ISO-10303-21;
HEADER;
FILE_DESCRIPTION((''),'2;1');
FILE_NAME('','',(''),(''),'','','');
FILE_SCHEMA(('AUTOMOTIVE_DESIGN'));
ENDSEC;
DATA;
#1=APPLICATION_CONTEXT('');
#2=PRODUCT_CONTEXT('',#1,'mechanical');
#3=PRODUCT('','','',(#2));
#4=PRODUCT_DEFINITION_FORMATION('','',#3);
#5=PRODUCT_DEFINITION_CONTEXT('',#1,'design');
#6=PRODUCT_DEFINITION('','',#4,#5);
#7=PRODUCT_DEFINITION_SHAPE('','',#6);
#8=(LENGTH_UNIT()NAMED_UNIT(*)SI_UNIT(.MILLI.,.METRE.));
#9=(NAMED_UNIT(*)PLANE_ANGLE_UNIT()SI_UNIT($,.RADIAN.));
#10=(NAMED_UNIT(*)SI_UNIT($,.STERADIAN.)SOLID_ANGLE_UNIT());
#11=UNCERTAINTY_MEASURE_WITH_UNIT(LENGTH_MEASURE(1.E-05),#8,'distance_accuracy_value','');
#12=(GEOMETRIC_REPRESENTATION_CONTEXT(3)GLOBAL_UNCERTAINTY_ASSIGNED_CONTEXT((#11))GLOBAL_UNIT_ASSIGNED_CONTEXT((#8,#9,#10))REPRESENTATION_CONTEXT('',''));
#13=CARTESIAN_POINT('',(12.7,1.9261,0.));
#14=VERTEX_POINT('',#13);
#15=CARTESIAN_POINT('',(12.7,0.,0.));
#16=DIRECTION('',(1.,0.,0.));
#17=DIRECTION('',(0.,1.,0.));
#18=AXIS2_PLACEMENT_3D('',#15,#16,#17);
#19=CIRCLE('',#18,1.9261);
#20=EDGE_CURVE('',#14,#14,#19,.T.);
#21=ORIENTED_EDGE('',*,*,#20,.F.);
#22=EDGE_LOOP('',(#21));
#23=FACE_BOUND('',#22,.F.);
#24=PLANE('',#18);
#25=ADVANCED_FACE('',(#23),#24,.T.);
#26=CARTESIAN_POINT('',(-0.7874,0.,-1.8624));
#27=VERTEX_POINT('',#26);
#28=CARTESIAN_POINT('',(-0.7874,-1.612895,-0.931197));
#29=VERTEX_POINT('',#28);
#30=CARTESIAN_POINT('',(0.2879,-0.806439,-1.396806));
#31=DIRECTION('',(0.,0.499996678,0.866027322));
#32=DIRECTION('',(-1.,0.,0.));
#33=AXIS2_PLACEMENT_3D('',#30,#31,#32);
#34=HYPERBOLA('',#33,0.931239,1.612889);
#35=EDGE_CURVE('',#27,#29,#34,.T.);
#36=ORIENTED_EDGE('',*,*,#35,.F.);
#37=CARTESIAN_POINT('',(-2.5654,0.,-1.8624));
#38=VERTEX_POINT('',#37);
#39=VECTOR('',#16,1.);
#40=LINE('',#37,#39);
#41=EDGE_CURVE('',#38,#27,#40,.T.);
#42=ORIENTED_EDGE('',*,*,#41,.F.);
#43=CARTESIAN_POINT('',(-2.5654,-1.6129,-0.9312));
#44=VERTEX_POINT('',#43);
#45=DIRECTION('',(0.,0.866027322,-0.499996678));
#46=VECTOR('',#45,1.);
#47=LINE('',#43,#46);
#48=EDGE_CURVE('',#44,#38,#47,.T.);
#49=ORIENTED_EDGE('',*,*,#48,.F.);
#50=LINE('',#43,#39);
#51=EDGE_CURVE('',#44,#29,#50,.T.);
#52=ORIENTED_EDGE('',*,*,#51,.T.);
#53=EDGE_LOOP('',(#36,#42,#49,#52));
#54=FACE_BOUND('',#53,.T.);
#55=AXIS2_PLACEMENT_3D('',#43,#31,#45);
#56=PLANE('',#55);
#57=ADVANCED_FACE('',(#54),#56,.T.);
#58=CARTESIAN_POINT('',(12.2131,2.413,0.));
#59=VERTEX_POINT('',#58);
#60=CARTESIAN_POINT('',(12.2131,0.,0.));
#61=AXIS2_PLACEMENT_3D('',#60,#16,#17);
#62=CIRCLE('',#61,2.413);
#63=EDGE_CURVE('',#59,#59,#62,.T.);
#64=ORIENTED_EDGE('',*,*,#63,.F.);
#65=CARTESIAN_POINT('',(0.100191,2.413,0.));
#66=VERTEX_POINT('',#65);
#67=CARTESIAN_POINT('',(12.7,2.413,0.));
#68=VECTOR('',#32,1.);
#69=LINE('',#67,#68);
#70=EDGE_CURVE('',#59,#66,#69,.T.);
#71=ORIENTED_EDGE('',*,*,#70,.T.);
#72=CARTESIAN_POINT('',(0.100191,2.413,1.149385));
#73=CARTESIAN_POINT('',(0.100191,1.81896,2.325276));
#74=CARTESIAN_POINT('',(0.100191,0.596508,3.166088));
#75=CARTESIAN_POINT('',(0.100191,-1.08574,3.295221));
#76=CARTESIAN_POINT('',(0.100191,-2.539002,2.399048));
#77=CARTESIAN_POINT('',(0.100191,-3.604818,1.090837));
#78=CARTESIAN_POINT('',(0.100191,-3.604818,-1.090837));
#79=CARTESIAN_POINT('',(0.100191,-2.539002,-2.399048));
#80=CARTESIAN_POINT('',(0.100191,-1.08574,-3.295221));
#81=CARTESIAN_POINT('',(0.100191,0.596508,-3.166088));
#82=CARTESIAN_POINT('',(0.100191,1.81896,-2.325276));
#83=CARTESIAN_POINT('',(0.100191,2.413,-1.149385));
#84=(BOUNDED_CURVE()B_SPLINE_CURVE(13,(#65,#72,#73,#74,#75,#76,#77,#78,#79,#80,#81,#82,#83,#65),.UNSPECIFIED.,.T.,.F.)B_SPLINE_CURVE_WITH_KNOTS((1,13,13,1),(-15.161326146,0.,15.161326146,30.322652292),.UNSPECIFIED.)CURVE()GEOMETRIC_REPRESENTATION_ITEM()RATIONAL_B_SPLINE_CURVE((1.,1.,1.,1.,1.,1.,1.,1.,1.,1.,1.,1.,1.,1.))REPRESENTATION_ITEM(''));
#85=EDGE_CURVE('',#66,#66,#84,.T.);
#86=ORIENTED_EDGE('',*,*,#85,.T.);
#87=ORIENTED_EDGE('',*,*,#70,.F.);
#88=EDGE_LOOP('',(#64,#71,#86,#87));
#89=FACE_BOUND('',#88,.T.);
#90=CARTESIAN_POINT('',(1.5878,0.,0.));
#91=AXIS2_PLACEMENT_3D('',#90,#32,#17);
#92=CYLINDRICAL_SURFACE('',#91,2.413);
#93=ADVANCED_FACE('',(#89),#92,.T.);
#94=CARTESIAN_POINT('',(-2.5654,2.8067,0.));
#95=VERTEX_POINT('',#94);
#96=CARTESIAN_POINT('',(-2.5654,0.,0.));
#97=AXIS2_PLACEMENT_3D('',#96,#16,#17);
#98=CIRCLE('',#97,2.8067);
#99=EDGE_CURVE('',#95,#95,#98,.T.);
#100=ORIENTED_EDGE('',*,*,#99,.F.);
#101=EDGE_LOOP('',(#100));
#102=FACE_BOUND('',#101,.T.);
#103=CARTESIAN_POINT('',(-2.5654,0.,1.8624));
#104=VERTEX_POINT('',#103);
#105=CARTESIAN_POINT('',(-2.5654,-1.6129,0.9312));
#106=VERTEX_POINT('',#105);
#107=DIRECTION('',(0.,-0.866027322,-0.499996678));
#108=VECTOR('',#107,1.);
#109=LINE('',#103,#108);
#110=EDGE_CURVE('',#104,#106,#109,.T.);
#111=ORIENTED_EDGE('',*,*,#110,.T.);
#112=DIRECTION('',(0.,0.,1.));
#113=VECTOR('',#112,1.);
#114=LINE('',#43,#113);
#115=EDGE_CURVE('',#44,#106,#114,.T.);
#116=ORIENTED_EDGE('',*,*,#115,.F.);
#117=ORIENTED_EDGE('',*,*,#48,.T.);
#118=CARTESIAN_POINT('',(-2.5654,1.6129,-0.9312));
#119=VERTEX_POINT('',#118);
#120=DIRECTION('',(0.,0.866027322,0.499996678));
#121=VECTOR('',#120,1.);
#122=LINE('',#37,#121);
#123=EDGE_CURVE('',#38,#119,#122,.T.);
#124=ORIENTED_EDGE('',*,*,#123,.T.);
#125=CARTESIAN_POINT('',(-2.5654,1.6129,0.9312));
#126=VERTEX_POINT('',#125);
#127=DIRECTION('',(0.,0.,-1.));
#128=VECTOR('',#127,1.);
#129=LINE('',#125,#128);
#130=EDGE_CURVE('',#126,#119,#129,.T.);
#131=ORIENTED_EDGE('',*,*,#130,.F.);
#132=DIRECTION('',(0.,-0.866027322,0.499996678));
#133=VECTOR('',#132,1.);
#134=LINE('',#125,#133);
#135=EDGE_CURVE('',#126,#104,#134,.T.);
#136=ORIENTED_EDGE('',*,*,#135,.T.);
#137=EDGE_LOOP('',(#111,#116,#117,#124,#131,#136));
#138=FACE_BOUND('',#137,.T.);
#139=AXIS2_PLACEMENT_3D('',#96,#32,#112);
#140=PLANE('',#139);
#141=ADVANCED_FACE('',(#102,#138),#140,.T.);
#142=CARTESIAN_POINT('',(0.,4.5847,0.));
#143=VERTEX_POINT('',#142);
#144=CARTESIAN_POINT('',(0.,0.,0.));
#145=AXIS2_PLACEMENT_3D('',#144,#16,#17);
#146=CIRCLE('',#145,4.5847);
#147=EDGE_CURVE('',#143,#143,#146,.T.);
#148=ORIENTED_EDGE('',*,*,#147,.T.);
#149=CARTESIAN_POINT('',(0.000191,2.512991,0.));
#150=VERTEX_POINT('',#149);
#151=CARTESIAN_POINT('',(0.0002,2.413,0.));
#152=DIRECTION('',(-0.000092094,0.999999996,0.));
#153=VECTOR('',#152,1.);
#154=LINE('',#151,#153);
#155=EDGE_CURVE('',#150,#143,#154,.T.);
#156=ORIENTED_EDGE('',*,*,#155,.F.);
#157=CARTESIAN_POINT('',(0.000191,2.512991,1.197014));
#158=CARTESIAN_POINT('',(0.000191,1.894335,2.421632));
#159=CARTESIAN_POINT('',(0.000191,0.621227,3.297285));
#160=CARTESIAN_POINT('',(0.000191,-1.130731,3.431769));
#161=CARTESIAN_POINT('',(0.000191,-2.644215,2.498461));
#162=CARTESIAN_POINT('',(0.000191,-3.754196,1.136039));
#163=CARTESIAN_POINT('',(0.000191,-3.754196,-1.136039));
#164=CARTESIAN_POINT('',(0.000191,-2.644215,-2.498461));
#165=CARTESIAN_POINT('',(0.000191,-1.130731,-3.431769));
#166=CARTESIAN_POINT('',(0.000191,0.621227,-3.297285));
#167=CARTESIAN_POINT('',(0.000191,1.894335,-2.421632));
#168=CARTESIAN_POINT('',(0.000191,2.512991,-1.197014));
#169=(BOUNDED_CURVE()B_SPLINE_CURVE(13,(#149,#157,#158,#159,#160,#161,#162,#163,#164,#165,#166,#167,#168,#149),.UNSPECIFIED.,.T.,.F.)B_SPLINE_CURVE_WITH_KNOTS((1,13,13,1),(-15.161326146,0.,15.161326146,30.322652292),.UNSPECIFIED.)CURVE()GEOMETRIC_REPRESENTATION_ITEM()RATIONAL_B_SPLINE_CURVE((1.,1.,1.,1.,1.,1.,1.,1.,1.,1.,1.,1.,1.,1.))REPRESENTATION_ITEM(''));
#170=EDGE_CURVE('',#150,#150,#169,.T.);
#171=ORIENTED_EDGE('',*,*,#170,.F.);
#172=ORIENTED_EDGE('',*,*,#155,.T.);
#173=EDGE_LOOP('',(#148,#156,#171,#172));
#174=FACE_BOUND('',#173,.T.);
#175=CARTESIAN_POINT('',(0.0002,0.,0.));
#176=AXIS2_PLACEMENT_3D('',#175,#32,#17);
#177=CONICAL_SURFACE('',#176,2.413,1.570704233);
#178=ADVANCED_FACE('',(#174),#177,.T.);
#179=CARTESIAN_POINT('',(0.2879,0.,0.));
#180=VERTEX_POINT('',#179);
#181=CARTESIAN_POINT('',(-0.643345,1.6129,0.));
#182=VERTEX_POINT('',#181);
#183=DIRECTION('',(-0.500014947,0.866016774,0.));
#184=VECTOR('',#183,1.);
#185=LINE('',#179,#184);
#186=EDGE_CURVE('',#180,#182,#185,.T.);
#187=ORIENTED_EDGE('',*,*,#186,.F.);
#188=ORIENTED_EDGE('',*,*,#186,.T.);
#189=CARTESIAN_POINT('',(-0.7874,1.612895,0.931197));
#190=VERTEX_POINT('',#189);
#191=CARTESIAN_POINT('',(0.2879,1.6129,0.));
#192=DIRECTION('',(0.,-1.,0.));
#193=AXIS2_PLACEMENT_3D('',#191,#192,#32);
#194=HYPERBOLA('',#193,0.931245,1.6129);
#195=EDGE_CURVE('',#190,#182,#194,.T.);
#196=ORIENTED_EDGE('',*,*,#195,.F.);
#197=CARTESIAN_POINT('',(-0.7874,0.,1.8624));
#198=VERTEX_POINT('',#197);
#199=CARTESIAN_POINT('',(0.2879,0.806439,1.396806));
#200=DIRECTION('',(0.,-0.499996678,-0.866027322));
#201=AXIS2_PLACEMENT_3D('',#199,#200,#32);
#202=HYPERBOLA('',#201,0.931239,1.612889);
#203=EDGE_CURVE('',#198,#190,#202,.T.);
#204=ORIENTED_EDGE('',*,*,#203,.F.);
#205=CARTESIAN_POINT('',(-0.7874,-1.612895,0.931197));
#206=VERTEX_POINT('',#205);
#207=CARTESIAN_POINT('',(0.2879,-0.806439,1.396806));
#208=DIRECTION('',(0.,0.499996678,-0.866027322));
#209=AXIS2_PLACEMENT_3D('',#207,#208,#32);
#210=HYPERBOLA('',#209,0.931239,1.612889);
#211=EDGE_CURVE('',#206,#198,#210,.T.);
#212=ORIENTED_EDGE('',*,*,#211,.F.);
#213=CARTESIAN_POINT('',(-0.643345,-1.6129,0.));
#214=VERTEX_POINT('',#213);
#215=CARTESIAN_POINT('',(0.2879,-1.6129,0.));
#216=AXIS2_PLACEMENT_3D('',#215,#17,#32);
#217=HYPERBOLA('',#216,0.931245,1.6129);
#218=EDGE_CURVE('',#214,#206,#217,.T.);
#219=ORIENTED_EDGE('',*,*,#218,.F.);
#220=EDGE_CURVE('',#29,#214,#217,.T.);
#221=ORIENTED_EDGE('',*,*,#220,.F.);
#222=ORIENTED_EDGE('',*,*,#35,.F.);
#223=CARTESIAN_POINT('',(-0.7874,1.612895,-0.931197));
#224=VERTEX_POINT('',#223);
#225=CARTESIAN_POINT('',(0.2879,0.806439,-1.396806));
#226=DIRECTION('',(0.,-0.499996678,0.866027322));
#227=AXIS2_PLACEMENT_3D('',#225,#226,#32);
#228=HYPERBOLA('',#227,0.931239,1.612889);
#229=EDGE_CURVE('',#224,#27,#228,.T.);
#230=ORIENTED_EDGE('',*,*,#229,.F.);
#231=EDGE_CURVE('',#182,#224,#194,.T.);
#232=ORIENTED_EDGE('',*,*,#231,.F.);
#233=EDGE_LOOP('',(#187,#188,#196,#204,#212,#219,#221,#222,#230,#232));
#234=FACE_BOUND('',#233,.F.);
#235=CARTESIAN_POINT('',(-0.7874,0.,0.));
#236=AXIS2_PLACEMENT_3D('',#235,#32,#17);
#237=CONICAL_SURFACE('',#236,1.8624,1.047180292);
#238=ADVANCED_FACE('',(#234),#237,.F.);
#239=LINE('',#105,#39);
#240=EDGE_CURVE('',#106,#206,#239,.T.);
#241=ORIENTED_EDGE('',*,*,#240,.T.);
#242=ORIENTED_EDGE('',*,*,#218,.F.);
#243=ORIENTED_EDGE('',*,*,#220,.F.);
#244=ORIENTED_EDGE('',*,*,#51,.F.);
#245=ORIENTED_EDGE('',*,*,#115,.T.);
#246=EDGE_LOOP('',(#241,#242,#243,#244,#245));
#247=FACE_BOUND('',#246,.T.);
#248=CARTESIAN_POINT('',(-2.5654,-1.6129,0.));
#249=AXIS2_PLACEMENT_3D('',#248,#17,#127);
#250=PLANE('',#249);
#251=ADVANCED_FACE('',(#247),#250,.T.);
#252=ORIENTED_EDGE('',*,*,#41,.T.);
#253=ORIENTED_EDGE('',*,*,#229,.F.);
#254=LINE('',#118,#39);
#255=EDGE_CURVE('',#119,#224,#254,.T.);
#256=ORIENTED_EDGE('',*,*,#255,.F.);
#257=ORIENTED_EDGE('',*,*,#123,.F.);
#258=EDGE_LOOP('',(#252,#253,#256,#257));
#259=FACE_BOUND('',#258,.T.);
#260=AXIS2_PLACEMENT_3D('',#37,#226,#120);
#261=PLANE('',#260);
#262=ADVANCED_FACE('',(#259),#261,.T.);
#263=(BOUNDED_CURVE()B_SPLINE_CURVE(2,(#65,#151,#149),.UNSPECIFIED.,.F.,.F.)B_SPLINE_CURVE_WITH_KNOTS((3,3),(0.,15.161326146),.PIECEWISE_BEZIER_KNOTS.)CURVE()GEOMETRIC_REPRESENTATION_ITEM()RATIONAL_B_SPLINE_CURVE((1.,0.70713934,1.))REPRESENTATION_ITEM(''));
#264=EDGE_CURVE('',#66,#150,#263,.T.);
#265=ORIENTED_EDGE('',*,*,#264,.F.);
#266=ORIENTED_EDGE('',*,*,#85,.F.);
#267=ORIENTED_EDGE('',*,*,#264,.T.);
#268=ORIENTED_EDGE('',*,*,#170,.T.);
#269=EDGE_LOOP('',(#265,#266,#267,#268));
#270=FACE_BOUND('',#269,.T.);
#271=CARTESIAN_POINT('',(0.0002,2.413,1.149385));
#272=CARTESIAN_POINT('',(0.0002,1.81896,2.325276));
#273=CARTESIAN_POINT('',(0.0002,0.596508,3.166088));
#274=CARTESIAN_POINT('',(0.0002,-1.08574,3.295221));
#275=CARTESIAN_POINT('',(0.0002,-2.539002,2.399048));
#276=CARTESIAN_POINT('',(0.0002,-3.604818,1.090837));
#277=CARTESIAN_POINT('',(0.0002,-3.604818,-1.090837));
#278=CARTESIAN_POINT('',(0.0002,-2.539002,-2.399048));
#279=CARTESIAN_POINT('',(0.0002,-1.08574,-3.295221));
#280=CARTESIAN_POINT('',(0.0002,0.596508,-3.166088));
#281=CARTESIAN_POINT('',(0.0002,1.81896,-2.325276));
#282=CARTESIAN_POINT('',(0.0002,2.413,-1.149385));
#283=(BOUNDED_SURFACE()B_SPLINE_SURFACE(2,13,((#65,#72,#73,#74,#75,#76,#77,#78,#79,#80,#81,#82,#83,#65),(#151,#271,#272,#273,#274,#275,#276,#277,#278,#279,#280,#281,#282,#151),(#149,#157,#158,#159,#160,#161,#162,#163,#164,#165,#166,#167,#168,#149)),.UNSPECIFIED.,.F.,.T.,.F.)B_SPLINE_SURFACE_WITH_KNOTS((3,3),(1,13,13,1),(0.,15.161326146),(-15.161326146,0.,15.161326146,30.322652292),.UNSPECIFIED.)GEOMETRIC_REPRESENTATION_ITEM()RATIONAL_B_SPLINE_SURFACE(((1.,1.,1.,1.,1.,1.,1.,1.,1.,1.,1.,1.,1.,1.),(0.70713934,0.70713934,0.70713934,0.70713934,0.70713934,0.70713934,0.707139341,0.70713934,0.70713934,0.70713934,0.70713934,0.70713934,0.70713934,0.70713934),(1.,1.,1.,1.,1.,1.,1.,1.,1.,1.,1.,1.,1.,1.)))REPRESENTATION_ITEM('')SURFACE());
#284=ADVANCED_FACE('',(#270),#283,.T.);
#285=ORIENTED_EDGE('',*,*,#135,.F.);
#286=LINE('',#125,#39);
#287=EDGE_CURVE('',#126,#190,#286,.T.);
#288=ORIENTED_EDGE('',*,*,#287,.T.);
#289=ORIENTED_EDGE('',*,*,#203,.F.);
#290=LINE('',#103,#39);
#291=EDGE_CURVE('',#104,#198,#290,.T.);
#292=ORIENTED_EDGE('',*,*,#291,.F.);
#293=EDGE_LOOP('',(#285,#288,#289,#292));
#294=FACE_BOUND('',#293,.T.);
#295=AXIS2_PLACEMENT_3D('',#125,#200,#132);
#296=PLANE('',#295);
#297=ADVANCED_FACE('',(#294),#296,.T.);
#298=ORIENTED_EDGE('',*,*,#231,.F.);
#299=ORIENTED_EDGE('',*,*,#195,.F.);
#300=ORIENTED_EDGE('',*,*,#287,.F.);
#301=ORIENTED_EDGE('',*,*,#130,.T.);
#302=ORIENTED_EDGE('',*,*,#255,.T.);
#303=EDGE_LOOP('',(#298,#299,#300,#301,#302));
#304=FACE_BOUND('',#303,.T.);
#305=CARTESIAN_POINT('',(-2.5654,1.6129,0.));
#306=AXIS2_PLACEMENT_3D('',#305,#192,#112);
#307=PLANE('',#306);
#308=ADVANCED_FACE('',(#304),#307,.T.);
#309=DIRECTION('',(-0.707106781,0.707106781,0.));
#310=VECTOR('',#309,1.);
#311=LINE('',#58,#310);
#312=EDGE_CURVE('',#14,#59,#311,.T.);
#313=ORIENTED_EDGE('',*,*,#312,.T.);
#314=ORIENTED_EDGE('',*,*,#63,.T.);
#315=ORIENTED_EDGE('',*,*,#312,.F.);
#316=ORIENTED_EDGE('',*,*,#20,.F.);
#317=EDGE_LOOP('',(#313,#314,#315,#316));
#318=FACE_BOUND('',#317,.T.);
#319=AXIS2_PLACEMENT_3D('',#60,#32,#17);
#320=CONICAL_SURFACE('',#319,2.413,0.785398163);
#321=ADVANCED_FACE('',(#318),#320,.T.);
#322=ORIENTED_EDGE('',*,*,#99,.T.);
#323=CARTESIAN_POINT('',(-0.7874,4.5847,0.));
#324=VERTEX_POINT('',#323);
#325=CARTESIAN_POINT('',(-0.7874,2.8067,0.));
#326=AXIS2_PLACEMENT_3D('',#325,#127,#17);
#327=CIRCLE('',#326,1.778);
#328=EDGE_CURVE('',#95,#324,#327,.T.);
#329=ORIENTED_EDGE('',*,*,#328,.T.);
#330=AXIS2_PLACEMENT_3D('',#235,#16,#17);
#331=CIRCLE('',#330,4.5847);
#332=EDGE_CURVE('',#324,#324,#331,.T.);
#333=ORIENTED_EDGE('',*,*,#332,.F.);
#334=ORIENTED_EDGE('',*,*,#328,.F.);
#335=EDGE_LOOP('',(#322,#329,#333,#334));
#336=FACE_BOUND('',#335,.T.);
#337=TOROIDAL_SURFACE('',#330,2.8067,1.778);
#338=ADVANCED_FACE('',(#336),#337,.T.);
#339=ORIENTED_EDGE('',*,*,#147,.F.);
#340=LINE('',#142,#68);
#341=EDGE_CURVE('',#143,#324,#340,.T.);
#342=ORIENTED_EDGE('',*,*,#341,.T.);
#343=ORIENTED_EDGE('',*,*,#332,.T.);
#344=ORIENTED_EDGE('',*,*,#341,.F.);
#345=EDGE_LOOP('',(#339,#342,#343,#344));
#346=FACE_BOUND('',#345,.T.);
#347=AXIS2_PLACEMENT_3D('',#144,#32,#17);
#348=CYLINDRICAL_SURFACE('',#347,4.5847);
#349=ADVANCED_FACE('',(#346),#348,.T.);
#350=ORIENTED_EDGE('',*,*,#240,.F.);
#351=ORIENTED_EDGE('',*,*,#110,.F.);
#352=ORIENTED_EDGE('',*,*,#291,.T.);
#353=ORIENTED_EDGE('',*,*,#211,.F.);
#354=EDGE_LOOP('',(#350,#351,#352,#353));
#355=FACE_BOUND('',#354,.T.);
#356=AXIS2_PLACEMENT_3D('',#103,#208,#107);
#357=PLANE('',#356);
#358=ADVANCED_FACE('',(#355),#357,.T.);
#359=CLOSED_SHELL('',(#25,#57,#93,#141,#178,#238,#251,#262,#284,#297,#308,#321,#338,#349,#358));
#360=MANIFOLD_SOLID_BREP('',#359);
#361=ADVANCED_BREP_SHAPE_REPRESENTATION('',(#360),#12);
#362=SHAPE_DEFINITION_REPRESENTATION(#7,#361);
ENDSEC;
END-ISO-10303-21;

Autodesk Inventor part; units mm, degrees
ref_plane "YZ Plane" through (0, 0, 0) normal (1, 0, 0) x (0, 1, 0)
ref_plane "XZ Plane" through (0, 0, 0) normal (0, 1, 0) x (-1, 0, 0)
sketch "Sketch1" plane through (0, 0, 0) normal (0, 0, 1) x (1, 0, 0)
  line L0 (0.2879, 0) -> (12.7, 0)
  line L1 (12.7, 0) -> (12.7, 2.413)
  line L2 (12.7, 2.413) -> (1.5878, 2.413)
  line L3 (1.5878, 2.413) -> (0.0002, 2.413)
  line L4 (0.0002, 2.413) -> (0, 2.413)
  line L5 (0, 2.413) -> (0, 4.5847)
  line L6 (0, 4.5847) -> (-2.5654, 4.5847)
  line L7 (-2.5654, 4.5847) -> (-2.5654, 1.8624)
  line L8 (-2.5654, 1.8624) -> (-0.7874, 1.8624)
  line L9 (-0.7874, 1.8624) -> (0.2879, 0)
  line L10 (-5.6185, 0) -> (15.7531, 0) projected
  line L11 (0, -0.9169) -> (0, 5.5016) projected
  line L12 (1.5878, 2.413) -> (0, 2.413) construction
  dimension "d1" = 11.1122
  dimension "d2" = 1.5876
  dimension "d3" = 2.5654
  dimension "d4" = 1.778
  dimension "d5" = 60
  dimension "d6" = 4.826
  dimension "d7" = 4.826
  dimension "d8" = 3.7248
  dimension "d9" = 9.1694
  dimension "d26" = 12.7
revolve "Body" add sketch "Sketch1" angle 360 about axis through (0.2879, 0, 0) along (1, 0, 0) contours L9 L11 L3 L2 L1 L0 | L9 L8 L7 L6 L5 L11
sketch "Sketch2" plane through (-2.5654, 0, 0) normal (-1, 0, 0) x (0, 0, 1)
  circle A0 centre (0, 0) radius 1.8624 projected
  line L0 (0, -6.4186) -> (0, 6.4186) projected
  line L1 (-6.4186, 0) -> (6.4186, 0) projected
  line L2 (1.8624, 0) -> (0.9312, -1.6129)
  line L3 (0.9312, -1.6129) -> (-0.9312, -1.6129)
  line L4 (-0.9312, -1.6129) -> (-1.8624, 0)
  line L5 (-1.8624, 0) -> (-0.9312, 1.6129)
  line L6 (-0.9312, 1.6129) -> (0.9312, 1.6129)
  line L7 (0.9312, 1.6129) -> (1.8624, 0)
extrude "Slot" add sketch "Sketch2" against normal up to next contours L7 A0 | A0 L2 | L6 L0 A0 | A0 L0 L3 | L0 L6 A0 | A0 L3 L0 | L4 A0 | A0 L5
fillet "Fillet1" radius 1.778 1 edges at (-2.5654, -4.5847, 0)
thread "Thread" size "10-32 UNF" class "2A" standard "ANSI Unified Screw Threads" length 11.1122
chamfer "Chamfer1" distance 0.4869 distance2 0.4869 1 edges at (12.7, -2.413, 0) measured on face at (12.7, -0.2852, -0.7521)
ref_plane "Work Plane1" through (29, 0, 0) normal (0, -1, 0) x (1, 0, 0)
fillet "Fillet2" radius 0.1 1 edges at (0.0002, -2.413, 0)
equation "\"d30\" = R"
equation "\"d17\" = RR"
equation "\"d13\" = GEL"
equation "\"d15\" = -0.5 * SPD + 0.5 * GD"
equation "\"d16\" = GUL"
equation "\"d1\" = GEL"
equation "\"d3\" = KOH"
equation "\"d4\" = INTI"
equation "\"d6\" = GD"
equation "\"d7\" = BDM"
equation "\"d8\" = 1.1547 * SW"
equation "\"d9\" = KOD"
equation "\"d26\" = NLG"
equation "\"GD\" = NND"
equation "\"NLG\" = 12.7"
equation "\"GEL\" = 11.11225"
equation "\"KOD\" = 9.1694"
equation "\"KOH\" = 2.5654"
equation "\"INTI\" = 1.778"
equation "\"GAL\" = 1.5875"
equation "\"GUL\" = 0.48692"
equation "\"BDM\" = NND"
equation "\"SW\" = 3.2258"
equation "\"RR\" = 1.778"
equation "\"SPD\" = GD1"
equation "\"R\" = 0.1"
equation "\"KR\" = 4.699"
equation "\"GD1\" = 3.85216"
equation "\"THREADDIA\" = 4.826"
equation "\"FAWI\" = 45deg"
equation "\"KOH1\" = 1.778"
equation "\"NND\" = 4.826"
equation "\"TOA\" = 30deg"
equation "\"E0\" = 1.155 * SW"
properties part number "Unbrako - 10 x 1/2" material "Steel, Mild"
